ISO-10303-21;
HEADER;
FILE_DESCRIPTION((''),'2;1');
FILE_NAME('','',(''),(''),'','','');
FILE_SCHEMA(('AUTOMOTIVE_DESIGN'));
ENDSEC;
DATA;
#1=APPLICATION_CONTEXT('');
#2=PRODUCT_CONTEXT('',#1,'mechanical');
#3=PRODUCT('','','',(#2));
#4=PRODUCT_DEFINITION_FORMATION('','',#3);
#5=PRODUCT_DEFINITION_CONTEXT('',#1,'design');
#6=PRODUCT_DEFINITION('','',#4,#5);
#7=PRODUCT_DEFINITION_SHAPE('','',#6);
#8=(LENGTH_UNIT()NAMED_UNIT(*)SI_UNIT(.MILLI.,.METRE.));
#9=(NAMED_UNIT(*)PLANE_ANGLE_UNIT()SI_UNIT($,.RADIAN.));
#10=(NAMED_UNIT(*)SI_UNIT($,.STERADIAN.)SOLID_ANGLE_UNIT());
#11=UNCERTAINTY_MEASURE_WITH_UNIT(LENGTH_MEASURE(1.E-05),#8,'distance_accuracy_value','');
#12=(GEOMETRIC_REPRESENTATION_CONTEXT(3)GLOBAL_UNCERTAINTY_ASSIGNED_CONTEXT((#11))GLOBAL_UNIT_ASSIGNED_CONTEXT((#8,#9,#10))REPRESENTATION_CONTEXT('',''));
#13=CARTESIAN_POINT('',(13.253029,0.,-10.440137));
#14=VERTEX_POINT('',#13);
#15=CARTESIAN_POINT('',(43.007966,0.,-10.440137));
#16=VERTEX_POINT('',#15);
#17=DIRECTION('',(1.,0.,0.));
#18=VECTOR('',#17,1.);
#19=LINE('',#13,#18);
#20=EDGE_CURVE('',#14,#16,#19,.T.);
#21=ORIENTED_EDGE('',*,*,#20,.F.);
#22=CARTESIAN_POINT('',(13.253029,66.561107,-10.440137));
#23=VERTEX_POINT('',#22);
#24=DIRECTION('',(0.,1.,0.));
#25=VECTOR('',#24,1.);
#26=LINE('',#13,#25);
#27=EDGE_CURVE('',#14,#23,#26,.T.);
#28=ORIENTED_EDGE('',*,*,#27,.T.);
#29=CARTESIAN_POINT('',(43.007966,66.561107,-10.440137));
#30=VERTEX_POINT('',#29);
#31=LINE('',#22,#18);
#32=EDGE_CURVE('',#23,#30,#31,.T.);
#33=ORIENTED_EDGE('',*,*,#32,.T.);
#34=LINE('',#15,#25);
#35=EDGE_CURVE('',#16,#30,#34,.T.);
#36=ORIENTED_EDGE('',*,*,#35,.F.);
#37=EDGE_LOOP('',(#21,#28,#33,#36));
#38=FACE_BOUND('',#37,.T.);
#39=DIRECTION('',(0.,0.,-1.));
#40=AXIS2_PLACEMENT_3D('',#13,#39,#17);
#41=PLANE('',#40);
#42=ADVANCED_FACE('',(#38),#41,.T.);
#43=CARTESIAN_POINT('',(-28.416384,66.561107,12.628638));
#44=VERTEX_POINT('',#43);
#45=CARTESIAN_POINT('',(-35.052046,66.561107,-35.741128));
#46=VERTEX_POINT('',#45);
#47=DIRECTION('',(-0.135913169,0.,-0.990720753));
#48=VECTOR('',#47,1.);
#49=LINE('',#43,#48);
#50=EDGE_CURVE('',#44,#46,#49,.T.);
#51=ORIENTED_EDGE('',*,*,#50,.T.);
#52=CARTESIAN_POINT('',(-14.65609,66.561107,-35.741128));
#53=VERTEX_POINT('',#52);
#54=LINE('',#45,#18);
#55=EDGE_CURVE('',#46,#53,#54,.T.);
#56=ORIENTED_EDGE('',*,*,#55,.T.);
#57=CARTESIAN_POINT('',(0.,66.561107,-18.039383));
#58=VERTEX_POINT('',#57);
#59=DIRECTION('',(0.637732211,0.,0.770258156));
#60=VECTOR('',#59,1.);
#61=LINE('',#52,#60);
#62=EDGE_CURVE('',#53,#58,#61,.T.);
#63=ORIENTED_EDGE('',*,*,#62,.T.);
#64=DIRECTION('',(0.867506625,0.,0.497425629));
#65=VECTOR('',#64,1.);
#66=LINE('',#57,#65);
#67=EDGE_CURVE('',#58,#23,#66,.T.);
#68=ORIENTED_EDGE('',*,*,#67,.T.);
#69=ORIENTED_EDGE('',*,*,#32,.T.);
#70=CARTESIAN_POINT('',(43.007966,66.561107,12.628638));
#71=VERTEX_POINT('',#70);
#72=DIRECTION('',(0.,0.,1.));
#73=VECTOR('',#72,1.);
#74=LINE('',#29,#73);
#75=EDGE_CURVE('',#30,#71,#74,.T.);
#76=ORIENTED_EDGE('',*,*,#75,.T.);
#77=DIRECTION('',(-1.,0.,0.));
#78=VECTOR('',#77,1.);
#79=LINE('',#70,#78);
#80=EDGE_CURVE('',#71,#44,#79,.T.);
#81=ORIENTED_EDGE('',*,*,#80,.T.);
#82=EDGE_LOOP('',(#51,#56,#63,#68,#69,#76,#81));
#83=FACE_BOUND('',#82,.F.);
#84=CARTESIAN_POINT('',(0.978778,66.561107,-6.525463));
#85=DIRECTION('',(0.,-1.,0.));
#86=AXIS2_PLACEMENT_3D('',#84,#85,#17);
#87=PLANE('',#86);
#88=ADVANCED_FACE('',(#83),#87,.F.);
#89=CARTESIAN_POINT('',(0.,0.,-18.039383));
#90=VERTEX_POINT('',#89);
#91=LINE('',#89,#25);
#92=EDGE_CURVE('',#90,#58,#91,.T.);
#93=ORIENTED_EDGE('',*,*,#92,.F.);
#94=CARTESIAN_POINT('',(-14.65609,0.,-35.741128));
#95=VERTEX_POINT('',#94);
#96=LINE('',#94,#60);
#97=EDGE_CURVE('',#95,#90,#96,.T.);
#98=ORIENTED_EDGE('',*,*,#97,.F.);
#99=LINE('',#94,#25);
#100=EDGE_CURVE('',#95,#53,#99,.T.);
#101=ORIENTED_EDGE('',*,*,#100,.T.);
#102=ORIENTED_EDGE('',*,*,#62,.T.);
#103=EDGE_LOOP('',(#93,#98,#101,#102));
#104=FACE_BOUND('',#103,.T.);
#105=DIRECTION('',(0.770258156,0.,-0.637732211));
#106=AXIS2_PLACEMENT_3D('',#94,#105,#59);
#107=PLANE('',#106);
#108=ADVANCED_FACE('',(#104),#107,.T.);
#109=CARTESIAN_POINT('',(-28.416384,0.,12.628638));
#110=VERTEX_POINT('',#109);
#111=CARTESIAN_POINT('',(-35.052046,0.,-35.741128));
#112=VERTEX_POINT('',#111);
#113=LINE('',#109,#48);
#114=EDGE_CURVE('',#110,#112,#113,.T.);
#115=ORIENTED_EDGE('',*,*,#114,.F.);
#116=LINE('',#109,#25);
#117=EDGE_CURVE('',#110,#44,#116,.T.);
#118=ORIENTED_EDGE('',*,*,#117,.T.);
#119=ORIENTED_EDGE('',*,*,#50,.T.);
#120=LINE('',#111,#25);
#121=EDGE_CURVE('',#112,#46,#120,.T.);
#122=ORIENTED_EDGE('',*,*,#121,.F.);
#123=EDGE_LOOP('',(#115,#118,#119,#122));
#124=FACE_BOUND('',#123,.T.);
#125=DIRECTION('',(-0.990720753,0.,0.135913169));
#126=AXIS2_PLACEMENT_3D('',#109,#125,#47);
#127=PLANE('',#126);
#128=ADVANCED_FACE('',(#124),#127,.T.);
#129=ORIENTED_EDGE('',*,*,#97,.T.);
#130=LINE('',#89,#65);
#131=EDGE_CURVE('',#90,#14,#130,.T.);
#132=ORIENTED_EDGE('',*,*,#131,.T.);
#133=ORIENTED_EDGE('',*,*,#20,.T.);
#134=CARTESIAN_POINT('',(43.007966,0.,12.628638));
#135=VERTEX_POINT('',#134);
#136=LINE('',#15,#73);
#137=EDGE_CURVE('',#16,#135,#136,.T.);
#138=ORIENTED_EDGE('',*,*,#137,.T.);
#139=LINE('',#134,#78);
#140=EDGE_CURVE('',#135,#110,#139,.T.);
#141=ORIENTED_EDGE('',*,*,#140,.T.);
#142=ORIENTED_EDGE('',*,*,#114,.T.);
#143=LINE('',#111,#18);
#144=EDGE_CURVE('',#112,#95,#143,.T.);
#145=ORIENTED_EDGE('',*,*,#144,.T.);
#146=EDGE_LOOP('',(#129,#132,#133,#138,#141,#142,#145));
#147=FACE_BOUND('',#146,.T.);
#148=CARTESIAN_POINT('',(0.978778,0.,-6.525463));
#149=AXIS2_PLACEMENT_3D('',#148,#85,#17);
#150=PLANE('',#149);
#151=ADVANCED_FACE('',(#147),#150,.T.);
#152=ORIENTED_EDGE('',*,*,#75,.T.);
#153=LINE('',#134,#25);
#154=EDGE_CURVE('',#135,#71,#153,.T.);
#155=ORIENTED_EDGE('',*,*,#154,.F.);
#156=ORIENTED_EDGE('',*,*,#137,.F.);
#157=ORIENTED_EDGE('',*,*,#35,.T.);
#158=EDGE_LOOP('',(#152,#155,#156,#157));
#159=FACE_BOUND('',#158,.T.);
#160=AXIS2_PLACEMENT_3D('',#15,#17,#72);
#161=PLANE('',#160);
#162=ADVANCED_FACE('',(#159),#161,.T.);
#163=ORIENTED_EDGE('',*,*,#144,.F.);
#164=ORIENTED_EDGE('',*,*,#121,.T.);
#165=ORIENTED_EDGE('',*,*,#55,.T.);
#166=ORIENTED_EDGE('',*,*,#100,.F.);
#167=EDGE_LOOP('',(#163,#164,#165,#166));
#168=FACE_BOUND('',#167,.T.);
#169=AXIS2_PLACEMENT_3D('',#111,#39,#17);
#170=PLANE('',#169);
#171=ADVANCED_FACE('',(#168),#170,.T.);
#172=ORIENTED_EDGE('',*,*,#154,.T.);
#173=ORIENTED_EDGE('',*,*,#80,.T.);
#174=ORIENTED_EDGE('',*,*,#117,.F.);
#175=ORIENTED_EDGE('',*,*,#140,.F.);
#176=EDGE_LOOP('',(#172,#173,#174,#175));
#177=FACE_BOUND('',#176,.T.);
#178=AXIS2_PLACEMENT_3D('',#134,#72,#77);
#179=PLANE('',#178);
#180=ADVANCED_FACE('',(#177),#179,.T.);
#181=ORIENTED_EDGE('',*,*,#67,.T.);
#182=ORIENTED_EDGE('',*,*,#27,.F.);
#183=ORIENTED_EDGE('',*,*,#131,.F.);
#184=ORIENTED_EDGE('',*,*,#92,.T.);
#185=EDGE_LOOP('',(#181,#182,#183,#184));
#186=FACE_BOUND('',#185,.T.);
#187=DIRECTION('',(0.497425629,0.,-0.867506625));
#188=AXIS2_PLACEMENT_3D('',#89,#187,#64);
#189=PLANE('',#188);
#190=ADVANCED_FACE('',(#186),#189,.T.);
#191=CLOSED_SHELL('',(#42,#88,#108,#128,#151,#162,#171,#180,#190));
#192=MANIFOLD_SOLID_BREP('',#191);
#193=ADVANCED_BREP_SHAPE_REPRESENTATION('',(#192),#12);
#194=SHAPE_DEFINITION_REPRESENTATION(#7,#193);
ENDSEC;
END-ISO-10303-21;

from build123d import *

# Parameters (mm, degrees)
F1_DEPTH = 66.5611065924


# Not quite as in the source:
# - the program builds the solid bodies; features that only make, move or delete a surface that nothing else refers to are left out


with BuildPart() as f1:
    # F0 (on Front) → F1 (new body)
    with BuildSketch(Plane.XZ):
        Polygon((-28.4163840115, 12.6286381856), (-35.0520461798, -35.7411280274), (-14.6560901776, -35.7411280274), (0, -18.0393829942), (13.2530285046, -10.4401372373), (43.007966131, -10.4401372373), (43.007966131, 12.6286381856), (-11.0137574375, 12.6286381856), align=None)
    extrude(amount=-F1_DEPTH)


solid = f1.part
